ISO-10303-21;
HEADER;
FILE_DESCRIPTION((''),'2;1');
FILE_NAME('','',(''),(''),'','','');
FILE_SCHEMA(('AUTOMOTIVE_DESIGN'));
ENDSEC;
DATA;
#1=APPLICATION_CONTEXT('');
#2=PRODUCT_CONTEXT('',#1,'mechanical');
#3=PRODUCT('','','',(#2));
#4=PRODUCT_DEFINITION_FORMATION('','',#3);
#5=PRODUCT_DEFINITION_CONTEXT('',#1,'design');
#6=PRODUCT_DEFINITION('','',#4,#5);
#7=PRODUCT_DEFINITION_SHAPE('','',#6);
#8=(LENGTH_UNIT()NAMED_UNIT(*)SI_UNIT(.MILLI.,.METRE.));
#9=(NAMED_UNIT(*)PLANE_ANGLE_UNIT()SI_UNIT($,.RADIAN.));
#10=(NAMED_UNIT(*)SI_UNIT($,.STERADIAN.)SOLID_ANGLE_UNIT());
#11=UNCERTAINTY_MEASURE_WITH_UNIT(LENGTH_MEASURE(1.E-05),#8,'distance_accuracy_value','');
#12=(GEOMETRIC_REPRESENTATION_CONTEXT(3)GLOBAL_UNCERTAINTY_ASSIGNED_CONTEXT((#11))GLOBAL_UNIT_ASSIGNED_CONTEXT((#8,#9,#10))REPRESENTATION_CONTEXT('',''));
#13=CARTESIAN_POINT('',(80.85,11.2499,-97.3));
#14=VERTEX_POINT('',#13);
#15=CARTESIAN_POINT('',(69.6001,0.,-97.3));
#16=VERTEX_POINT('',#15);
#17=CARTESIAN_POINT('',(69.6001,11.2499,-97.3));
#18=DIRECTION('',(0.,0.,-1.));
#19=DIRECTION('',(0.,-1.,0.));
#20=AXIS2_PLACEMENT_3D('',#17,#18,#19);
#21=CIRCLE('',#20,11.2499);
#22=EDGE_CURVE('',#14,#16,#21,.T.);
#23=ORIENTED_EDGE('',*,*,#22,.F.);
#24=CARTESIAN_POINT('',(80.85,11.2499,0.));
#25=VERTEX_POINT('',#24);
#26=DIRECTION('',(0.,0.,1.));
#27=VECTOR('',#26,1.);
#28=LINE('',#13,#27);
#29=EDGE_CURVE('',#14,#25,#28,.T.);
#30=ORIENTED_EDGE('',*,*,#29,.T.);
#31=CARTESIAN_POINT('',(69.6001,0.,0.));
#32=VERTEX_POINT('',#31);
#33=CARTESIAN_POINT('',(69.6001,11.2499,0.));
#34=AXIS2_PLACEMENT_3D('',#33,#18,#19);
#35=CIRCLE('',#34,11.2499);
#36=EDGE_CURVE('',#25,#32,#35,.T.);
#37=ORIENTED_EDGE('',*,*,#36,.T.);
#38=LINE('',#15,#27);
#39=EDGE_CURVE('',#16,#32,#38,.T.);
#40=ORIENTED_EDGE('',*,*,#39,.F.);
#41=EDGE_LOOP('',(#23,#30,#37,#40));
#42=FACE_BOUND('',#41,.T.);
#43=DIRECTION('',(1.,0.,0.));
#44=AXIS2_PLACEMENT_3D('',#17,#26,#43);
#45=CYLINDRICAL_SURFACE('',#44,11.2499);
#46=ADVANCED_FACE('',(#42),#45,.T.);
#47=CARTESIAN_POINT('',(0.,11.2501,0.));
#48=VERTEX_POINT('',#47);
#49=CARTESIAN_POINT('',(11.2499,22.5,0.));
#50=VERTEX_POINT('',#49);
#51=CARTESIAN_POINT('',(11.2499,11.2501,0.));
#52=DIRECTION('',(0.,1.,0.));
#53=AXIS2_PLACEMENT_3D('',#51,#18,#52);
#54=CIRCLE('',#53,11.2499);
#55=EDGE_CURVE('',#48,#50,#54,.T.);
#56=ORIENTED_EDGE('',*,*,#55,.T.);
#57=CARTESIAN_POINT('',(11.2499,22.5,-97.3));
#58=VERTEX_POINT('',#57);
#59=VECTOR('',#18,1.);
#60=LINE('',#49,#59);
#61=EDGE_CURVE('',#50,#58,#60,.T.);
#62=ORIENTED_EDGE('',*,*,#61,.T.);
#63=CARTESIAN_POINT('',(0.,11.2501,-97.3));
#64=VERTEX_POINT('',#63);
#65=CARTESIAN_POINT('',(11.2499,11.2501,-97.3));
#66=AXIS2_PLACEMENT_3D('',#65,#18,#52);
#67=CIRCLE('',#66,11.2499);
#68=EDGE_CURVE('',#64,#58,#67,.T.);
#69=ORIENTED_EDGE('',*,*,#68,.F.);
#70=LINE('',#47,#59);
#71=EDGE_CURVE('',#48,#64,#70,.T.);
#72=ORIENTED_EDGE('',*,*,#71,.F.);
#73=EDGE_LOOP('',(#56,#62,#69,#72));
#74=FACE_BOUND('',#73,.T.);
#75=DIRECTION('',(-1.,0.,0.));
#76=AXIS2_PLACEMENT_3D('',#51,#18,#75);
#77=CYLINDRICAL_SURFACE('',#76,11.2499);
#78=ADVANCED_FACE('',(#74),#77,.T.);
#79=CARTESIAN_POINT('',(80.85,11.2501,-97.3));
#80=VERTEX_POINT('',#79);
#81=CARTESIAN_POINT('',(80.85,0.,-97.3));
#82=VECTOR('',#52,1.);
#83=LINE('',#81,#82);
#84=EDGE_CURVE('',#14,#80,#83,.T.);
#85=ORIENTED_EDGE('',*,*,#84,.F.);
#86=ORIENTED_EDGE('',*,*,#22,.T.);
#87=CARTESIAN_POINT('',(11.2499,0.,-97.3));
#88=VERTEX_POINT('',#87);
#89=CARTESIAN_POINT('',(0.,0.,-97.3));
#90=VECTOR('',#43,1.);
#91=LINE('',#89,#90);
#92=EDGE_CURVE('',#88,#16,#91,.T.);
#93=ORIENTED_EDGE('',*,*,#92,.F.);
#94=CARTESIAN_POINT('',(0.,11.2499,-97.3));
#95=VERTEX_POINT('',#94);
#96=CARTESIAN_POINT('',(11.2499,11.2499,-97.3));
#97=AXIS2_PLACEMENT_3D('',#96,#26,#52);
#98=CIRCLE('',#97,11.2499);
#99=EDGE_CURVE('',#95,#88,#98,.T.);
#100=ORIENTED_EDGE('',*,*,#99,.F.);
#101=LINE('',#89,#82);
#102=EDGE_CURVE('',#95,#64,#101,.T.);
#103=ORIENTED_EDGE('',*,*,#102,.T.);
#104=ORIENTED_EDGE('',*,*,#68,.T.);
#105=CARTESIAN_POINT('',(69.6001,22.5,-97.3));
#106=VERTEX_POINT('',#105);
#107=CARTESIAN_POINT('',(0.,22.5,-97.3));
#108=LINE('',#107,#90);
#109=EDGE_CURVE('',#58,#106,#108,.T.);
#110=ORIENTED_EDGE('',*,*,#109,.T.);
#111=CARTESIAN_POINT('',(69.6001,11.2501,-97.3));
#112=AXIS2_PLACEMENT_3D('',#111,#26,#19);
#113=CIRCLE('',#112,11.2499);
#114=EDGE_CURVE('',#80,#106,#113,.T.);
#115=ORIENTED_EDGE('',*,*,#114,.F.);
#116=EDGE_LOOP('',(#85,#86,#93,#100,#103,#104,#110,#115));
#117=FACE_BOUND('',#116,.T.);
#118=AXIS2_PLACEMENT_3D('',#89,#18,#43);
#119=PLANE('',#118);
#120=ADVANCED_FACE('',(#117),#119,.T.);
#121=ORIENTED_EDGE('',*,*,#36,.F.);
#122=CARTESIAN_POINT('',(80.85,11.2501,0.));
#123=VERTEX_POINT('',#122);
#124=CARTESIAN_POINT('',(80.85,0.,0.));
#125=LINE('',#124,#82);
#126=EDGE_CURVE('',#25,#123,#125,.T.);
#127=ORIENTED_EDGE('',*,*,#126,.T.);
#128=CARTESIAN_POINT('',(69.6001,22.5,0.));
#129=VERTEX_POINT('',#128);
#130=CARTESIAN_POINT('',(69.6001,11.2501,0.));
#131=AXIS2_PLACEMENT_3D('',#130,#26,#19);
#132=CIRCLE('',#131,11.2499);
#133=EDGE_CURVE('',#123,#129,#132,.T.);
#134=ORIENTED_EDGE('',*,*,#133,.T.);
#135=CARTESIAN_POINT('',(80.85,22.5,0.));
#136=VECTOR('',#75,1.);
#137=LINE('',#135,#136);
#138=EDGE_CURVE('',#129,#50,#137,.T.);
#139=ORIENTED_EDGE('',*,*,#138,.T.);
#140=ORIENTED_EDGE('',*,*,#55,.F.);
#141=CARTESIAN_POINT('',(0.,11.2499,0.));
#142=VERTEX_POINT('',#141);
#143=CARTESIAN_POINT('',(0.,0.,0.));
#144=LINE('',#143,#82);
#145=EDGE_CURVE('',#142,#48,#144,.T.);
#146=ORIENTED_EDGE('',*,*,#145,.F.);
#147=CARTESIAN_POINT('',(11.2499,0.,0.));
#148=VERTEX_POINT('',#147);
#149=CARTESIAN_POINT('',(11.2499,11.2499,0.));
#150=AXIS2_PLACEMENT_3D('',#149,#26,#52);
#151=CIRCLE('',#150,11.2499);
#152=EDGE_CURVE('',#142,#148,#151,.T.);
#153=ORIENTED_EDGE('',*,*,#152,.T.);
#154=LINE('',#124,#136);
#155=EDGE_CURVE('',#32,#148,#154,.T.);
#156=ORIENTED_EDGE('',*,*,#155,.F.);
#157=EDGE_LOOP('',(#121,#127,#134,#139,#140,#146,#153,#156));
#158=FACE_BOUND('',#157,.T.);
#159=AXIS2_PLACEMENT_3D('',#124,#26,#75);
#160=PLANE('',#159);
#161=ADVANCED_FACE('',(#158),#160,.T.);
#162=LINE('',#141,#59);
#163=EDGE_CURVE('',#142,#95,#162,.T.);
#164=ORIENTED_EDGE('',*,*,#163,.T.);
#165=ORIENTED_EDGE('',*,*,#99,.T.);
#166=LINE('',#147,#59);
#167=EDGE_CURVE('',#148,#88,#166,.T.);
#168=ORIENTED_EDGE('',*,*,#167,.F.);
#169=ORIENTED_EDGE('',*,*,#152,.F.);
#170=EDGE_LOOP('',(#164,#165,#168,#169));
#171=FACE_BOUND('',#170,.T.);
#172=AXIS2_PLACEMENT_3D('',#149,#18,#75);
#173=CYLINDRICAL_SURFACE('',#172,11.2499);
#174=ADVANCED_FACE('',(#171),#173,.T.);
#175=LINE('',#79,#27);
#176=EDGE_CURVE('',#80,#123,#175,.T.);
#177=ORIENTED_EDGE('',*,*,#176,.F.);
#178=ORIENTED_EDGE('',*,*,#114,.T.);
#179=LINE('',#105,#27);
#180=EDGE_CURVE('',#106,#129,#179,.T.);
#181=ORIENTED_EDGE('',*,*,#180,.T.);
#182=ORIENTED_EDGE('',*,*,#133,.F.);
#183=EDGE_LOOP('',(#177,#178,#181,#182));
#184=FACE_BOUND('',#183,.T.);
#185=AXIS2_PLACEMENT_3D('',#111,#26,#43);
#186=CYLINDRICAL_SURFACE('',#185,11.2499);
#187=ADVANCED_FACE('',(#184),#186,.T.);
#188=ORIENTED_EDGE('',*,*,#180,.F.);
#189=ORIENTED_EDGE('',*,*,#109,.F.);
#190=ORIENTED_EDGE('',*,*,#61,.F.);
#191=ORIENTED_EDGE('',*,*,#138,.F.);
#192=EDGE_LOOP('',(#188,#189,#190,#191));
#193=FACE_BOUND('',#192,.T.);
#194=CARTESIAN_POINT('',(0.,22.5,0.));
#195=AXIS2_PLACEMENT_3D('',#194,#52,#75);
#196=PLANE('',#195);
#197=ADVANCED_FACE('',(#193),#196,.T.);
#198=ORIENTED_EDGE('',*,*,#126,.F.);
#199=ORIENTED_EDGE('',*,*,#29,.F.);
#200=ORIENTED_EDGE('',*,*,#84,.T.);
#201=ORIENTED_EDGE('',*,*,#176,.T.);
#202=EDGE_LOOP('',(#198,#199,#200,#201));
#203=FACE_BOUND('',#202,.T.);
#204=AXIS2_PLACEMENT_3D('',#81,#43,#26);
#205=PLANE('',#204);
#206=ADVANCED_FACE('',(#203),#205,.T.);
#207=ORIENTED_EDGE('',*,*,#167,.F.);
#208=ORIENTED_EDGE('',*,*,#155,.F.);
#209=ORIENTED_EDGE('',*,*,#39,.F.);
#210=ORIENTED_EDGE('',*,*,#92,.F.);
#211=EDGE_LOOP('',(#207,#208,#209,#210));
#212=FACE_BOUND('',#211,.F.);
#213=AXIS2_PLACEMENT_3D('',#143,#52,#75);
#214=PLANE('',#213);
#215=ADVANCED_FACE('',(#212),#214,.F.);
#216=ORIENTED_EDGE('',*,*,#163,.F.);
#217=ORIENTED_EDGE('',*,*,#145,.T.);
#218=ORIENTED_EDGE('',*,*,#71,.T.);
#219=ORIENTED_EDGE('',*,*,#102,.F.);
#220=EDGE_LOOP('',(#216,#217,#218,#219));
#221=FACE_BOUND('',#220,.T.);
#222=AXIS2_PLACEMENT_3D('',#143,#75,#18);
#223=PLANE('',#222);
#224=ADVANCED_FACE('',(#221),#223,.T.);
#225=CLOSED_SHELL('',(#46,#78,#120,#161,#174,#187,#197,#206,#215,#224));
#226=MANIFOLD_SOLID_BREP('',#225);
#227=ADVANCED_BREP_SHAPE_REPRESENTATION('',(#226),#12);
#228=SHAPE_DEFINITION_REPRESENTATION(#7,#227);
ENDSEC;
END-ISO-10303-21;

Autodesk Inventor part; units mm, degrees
ref_plane "YZ Plane" through (0, 0, 0) normal (1, 0, 0) x (0, 1, 0)
ref_plane "XZ Plane" through (0, 0, 0) normal (0, 1, 0) x (-1, 0, 0)
ref_plane "XY Plane" through (0, 0, 0) normal (0, 0, 1) x (1, 0, 0)
sketch "Sketch1" plane through (0, 0, 0) normal (0, 1, 0) x (-1, 0, 0)
  line L0 (0, 0) -> (0, -97.3)
  line L1 (0, -97.3) -> (-80.85, -97.3)
  line L2 (-80.85, -97.3) -> (-80.85, 0)
  line L3 (-80.85, 0) -> (0, 0)
  dimension "d0" = 97.3
  dimension "d1" = 80.85
extrude "Extrusion1" add sketch "Sketch1" along normal blind 22.5
fillet "Fillet2" radius 11.25 4 edges at (80.85, 22.5, -48.65) (0, 22.5, -48.65) (80.85, 0, -48.65) (0, 0, -48.65)
properties part number "anker_battery_pack"
